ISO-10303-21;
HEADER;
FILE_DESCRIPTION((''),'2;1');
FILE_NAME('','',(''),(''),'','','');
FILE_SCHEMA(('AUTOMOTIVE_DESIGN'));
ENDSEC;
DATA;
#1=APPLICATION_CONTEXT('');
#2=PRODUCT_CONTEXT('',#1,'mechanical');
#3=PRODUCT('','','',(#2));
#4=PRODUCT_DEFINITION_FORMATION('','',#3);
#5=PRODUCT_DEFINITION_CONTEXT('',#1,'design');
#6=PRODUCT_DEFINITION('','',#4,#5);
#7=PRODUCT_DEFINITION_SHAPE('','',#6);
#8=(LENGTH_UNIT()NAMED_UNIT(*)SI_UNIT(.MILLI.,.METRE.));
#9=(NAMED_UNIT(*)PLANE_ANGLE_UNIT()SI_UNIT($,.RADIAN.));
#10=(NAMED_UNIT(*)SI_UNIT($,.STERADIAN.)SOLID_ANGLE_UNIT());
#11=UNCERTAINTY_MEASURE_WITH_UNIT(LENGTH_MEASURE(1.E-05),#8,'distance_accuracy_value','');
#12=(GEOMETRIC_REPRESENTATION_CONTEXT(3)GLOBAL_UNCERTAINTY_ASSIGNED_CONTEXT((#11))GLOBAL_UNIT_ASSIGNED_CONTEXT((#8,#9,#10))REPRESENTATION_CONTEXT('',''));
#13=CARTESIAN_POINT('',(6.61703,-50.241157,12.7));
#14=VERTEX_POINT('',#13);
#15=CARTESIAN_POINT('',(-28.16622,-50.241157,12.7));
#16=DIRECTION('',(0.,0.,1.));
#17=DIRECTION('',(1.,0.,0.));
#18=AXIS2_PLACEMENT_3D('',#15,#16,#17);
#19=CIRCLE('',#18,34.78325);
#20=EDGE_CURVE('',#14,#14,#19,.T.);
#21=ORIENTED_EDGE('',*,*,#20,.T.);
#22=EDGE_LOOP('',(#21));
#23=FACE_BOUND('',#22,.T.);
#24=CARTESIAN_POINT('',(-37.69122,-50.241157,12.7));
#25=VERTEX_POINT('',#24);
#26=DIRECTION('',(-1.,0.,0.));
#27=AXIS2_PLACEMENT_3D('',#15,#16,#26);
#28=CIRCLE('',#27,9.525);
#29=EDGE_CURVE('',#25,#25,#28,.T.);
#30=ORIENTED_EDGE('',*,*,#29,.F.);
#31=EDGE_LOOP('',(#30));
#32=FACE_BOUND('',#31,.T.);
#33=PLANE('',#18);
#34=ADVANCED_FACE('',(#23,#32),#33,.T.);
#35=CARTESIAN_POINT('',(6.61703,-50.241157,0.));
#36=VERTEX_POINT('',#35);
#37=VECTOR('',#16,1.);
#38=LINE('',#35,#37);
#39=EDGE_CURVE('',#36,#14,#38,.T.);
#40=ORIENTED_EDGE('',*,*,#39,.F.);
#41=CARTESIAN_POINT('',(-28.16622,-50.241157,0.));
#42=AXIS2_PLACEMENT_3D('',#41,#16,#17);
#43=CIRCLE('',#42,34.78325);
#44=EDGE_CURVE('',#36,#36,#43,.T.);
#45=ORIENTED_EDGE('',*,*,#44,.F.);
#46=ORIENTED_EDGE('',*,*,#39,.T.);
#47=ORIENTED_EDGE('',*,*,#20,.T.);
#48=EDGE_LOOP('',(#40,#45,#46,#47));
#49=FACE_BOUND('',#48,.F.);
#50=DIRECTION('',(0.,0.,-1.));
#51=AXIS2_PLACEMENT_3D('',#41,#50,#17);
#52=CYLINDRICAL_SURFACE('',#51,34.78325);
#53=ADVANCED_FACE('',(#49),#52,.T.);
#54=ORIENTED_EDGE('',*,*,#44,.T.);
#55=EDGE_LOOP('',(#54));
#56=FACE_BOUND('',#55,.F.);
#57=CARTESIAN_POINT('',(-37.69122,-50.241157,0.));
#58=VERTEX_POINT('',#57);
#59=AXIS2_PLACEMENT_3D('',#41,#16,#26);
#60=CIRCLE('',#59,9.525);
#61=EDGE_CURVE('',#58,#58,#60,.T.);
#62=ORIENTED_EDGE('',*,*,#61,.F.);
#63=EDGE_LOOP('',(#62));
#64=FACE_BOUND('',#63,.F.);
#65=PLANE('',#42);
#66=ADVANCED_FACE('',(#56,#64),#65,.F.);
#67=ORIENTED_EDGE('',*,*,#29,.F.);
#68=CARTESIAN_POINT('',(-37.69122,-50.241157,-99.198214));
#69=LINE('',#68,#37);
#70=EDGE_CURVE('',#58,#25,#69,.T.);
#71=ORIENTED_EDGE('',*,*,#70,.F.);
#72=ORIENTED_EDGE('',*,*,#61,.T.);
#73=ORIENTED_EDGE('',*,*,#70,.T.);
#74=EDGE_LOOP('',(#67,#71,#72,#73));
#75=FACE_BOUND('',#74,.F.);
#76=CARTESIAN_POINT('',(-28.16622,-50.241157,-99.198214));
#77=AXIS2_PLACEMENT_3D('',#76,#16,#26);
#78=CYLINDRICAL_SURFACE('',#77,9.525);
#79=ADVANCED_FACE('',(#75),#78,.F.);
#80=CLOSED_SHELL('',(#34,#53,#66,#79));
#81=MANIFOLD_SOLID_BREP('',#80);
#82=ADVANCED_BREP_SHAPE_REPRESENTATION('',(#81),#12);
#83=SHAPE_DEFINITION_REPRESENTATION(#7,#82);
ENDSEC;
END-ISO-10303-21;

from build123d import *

# Parameters (mm, degrees)
F0_R     = 34.7832495942
F1_DEPTH = 12.7
F2_D     = 19.05


# Not quite as in the source:
# - a feature of the source that left no trace in its solid (it failed there, or was rolled back) is left out


with BuildPart() as f1:
    # F0 (on Top) → F1 (new body)
    with BuildSketch(Plane.XY):
        with Locations((-28.1662195921, -50.2411574125)):
            Circle(F0_R)
    extrude(amount=F1_DEPTH)

    # F2 (through all)
    with Locations(Plane(origin=(0, 0, 0), x_dir=(1, 0, 0), z_dir=(0, 0, -1))):
        with Locations((-28.1662195921, 50.2411574125)):
            Hole(F2_D / 2)


solid = f1.part
